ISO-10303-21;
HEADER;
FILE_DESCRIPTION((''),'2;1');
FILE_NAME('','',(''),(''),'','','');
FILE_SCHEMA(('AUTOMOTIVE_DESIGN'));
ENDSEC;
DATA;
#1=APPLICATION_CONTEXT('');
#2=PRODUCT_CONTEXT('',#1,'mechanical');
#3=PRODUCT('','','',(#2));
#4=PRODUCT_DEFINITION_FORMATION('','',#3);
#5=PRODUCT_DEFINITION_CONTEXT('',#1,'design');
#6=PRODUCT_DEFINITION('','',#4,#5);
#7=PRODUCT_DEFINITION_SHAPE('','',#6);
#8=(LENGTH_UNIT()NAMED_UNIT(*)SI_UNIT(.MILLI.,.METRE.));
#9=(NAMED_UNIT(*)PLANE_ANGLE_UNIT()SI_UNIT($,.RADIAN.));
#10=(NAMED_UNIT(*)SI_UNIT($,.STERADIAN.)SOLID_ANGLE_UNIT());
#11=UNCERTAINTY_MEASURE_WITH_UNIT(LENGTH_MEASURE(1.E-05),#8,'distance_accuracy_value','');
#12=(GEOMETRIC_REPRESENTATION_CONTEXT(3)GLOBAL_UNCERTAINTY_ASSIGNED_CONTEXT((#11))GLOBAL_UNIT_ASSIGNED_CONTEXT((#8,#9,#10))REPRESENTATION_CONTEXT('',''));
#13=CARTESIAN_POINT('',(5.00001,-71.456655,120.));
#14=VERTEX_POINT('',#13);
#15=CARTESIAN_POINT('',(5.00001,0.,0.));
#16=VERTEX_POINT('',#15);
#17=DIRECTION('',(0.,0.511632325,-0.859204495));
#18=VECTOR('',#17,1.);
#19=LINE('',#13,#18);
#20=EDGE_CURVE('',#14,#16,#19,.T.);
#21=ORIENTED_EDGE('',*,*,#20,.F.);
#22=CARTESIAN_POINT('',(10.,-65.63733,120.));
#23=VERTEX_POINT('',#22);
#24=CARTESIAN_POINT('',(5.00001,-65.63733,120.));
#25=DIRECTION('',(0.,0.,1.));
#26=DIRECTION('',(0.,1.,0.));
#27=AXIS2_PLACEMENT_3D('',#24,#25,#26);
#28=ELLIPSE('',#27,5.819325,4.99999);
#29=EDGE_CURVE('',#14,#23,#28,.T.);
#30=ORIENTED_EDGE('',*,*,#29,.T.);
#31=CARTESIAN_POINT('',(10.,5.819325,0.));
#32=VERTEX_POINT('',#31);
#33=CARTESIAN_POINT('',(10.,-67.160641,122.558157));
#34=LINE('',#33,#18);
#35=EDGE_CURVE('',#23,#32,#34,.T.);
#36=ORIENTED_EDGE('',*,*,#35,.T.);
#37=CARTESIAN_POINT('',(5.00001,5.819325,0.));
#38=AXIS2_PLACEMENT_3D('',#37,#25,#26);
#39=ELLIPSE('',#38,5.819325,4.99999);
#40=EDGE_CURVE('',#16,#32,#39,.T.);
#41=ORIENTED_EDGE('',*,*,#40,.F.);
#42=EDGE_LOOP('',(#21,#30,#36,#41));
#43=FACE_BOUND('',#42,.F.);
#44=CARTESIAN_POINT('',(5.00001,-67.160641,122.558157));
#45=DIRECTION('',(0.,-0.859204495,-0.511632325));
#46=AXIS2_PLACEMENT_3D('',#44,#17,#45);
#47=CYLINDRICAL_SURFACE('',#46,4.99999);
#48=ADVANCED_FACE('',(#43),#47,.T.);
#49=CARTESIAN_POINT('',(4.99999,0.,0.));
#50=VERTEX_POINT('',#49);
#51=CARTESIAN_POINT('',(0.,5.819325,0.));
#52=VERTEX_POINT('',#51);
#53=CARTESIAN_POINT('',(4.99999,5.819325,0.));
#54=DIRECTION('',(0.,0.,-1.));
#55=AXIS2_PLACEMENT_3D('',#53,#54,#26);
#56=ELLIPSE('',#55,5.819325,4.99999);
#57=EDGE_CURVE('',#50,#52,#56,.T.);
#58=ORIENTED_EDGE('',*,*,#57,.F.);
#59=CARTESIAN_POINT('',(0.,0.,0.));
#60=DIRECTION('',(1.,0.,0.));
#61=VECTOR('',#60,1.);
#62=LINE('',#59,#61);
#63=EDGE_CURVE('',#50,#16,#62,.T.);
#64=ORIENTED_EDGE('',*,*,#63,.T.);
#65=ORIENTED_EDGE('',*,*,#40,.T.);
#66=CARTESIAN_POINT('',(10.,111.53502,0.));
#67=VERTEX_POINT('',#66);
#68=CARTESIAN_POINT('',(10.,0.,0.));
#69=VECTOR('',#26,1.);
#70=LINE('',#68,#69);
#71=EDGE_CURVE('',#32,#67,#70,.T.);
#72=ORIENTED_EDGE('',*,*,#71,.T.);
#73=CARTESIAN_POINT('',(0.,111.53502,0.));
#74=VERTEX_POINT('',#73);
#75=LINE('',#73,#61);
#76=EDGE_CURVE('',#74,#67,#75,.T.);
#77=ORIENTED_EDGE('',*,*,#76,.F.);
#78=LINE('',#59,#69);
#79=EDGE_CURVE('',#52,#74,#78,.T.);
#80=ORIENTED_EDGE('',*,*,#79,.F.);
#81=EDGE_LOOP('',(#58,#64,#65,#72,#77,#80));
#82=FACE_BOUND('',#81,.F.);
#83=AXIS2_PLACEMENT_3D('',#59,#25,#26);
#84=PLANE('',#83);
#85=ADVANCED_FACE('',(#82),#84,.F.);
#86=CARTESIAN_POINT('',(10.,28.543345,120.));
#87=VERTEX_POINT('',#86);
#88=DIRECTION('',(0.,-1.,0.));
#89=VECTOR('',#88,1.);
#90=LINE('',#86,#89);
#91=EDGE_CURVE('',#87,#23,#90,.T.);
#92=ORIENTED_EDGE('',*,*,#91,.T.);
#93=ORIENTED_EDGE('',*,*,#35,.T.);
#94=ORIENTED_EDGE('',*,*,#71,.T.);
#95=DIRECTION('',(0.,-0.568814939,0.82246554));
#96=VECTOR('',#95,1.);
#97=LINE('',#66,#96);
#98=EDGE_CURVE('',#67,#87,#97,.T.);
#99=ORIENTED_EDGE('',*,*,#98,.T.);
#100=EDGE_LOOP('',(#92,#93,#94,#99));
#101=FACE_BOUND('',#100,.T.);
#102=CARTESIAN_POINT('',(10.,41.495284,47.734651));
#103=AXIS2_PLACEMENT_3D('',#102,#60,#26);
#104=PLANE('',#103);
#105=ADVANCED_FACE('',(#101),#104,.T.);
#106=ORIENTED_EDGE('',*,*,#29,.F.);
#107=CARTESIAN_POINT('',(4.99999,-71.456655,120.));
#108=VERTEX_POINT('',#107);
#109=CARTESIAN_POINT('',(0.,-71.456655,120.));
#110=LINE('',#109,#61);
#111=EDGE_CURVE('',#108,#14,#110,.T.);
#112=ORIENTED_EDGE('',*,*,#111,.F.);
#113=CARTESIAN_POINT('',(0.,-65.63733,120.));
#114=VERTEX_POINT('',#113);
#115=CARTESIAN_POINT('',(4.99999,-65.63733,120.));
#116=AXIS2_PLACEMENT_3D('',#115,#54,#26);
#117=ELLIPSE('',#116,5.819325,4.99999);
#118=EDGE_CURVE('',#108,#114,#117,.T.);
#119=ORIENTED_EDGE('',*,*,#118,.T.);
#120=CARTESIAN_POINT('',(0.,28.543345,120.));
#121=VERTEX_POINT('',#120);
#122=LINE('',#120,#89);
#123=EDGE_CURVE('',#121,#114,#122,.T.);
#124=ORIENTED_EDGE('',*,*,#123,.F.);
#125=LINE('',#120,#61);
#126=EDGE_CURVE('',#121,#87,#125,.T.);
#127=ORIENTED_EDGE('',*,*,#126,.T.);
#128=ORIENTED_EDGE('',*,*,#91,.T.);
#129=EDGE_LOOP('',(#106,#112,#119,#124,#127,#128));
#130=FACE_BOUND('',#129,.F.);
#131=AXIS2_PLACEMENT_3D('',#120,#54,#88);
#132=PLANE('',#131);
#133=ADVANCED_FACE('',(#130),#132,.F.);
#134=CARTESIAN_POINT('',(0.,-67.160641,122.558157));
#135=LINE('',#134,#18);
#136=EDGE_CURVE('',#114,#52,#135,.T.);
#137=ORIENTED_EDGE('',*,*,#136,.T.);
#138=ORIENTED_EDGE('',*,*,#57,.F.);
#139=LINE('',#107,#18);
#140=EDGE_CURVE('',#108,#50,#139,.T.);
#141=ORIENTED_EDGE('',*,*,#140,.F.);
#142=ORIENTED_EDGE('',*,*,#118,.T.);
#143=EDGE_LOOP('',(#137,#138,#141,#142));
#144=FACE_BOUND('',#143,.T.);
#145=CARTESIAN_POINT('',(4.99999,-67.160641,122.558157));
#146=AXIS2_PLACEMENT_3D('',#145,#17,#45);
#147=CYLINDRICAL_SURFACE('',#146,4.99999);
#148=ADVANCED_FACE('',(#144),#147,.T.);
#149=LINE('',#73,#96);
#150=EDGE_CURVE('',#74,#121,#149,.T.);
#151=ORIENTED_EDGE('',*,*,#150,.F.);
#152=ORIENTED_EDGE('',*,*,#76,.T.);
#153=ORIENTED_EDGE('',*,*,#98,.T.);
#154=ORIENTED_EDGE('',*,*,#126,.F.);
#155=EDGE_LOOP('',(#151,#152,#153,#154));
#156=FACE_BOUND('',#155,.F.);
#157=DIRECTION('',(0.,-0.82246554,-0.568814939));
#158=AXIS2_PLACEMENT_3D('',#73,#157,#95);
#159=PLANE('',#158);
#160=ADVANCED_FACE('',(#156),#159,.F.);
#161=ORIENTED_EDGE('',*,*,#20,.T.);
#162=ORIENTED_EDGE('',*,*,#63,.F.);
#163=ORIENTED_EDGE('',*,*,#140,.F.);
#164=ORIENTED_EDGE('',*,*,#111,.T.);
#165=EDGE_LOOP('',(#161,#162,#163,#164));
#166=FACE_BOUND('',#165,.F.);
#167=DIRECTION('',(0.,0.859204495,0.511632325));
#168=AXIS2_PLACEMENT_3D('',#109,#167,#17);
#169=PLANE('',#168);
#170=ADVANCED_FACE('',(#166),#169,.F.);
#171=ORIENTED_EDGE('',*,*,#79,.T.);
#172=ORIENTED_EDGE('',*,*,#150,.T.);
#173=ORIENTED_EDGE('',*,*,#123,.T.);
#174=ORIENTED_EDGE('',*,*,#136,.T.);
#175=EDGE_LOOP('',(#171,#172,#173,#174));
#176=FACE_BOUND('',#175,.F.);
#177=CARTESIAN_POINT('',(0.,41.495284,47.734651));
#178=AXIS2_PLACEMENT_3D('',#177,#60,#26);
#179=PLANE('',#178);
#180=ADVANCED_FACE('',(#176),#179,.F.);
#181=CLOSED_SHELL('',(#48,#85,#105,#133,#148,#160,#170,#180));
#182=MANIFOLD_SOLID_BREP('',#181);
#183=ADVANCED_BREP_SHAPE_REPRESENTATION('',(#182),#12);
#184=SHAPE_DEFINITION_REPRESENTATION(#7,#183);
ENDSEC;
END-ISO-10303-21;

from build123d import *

# Parameters (mm, degrees)
F1_DEPTH = 10
F2_R     = 4.99999


# Not quite as in the source:
# - a fillet or chamfer is up to 0.001 mm smaller than in the source, because OpenCascade refuses the exact size


with BuildPart() as f1:
    # F0 (on Right) → F1 (new body)
    with BuildSketch(Plane.YZ):
        Polygon((0, 120), (0, 0), (111.5350200628, 0), (28.5433451417, 120), align=None)
        Polygon((-71.4566548583, 120), (0, 0), (0, 120), align=None)
    extrude(amount=F1_DEPTH)

    # F2 (radius 5 in the source; OpenCascade refuses exactly that, so slightly less here)
    f2_edges = [f1.edges().sort_by_distance(p)[0] for p in [
        (0, -35.728327, 60),
        (10, -35.728327, 60),
    ]]
    fillet(f2_edges, radius=F2_R)


solid = f1.part
